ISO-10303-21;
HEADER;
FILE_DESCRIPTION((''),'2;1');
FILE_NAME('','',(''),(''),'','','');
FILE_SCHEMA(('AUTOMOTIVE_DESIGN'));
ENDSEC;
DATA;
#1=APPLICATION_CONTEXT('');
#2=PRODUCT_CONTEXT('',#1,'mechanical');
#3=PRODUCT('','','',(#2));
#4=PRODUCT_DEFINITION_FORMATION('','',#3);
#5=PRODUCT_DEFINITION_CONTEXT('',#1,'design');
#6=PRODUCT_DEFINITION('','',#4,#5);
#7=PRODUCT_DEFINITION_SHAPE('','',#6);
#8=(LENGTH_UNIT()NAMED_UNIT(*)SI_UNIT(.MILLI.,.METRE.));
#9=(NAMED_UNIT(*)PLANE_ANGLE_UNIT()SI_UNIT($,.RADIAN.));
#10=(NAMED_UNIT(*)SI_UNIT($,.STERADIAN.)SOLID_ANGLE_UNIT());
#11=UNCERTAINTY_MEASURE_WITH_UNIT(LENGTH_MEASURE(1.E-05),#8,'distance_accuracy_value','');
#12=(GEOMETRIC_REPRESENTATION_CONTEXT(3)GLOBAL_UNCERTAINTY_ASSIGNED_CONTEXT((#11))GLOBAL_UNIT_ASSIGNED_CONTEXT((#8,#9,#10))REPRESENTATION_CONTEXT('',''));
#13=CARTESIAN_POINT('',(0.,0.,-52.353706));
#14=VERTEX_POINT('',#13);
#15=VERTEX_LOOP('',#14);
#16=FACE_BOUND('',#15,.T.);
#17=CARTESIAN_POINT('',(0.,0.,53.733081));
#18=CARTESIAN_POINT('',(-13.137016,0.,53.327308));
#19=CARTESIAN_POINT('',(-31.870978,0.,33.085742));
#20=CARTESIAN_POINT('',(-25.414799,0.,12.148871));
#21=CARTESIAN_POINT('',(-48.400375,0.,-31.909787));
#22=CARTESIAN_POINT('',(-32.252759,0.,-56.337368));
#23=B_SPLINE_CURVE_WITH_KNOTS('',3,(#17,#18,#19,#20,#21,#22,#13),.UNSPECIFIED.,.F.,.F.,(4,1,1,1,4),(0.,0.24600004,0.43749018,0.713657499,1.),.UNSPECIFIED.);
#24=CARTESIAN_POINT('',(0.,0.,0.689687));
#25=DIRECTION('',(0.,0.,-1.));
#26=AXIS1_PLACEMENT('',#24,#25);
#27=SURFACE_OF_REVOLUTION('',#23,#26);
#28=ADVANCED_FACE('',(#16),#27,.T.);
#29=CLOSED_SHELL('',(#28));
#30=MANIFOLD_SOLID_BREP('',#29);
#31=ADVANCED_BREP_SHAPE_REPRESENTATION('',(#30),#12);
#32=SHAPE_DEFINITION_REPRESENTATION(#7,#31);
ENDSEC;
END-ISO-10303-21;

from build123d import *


with BuildPart() as f1:
    # F0 (on Front) → F1 (revolve)
    with BuildSketch(Plane.XZ):
        with BuildLine():
            Line((0, -52.3537062109), (0, 53.7330806255))
            add(Edge.make_bspline(
                [(0, 53.7330806255), (-13.1370157052, 53.3273076159), (-31.8709778241, 33.0857424774), (-25.4147994701, 12.1488706254), (-48.4003754541, -31.9097866922), (-32.2527586063, -56.3373678785), (0, -52.3537062109)],
                knots=[0, 0, 0, 0, 0.2460000401, 0.4374901801, 0.7136574986, 1, 1, 1, 1], degree=3))
        make_face()
    revolve(axis=Axis((0, 0, 0.6896872073), (0, 0, -1)))


solid = f1.part
